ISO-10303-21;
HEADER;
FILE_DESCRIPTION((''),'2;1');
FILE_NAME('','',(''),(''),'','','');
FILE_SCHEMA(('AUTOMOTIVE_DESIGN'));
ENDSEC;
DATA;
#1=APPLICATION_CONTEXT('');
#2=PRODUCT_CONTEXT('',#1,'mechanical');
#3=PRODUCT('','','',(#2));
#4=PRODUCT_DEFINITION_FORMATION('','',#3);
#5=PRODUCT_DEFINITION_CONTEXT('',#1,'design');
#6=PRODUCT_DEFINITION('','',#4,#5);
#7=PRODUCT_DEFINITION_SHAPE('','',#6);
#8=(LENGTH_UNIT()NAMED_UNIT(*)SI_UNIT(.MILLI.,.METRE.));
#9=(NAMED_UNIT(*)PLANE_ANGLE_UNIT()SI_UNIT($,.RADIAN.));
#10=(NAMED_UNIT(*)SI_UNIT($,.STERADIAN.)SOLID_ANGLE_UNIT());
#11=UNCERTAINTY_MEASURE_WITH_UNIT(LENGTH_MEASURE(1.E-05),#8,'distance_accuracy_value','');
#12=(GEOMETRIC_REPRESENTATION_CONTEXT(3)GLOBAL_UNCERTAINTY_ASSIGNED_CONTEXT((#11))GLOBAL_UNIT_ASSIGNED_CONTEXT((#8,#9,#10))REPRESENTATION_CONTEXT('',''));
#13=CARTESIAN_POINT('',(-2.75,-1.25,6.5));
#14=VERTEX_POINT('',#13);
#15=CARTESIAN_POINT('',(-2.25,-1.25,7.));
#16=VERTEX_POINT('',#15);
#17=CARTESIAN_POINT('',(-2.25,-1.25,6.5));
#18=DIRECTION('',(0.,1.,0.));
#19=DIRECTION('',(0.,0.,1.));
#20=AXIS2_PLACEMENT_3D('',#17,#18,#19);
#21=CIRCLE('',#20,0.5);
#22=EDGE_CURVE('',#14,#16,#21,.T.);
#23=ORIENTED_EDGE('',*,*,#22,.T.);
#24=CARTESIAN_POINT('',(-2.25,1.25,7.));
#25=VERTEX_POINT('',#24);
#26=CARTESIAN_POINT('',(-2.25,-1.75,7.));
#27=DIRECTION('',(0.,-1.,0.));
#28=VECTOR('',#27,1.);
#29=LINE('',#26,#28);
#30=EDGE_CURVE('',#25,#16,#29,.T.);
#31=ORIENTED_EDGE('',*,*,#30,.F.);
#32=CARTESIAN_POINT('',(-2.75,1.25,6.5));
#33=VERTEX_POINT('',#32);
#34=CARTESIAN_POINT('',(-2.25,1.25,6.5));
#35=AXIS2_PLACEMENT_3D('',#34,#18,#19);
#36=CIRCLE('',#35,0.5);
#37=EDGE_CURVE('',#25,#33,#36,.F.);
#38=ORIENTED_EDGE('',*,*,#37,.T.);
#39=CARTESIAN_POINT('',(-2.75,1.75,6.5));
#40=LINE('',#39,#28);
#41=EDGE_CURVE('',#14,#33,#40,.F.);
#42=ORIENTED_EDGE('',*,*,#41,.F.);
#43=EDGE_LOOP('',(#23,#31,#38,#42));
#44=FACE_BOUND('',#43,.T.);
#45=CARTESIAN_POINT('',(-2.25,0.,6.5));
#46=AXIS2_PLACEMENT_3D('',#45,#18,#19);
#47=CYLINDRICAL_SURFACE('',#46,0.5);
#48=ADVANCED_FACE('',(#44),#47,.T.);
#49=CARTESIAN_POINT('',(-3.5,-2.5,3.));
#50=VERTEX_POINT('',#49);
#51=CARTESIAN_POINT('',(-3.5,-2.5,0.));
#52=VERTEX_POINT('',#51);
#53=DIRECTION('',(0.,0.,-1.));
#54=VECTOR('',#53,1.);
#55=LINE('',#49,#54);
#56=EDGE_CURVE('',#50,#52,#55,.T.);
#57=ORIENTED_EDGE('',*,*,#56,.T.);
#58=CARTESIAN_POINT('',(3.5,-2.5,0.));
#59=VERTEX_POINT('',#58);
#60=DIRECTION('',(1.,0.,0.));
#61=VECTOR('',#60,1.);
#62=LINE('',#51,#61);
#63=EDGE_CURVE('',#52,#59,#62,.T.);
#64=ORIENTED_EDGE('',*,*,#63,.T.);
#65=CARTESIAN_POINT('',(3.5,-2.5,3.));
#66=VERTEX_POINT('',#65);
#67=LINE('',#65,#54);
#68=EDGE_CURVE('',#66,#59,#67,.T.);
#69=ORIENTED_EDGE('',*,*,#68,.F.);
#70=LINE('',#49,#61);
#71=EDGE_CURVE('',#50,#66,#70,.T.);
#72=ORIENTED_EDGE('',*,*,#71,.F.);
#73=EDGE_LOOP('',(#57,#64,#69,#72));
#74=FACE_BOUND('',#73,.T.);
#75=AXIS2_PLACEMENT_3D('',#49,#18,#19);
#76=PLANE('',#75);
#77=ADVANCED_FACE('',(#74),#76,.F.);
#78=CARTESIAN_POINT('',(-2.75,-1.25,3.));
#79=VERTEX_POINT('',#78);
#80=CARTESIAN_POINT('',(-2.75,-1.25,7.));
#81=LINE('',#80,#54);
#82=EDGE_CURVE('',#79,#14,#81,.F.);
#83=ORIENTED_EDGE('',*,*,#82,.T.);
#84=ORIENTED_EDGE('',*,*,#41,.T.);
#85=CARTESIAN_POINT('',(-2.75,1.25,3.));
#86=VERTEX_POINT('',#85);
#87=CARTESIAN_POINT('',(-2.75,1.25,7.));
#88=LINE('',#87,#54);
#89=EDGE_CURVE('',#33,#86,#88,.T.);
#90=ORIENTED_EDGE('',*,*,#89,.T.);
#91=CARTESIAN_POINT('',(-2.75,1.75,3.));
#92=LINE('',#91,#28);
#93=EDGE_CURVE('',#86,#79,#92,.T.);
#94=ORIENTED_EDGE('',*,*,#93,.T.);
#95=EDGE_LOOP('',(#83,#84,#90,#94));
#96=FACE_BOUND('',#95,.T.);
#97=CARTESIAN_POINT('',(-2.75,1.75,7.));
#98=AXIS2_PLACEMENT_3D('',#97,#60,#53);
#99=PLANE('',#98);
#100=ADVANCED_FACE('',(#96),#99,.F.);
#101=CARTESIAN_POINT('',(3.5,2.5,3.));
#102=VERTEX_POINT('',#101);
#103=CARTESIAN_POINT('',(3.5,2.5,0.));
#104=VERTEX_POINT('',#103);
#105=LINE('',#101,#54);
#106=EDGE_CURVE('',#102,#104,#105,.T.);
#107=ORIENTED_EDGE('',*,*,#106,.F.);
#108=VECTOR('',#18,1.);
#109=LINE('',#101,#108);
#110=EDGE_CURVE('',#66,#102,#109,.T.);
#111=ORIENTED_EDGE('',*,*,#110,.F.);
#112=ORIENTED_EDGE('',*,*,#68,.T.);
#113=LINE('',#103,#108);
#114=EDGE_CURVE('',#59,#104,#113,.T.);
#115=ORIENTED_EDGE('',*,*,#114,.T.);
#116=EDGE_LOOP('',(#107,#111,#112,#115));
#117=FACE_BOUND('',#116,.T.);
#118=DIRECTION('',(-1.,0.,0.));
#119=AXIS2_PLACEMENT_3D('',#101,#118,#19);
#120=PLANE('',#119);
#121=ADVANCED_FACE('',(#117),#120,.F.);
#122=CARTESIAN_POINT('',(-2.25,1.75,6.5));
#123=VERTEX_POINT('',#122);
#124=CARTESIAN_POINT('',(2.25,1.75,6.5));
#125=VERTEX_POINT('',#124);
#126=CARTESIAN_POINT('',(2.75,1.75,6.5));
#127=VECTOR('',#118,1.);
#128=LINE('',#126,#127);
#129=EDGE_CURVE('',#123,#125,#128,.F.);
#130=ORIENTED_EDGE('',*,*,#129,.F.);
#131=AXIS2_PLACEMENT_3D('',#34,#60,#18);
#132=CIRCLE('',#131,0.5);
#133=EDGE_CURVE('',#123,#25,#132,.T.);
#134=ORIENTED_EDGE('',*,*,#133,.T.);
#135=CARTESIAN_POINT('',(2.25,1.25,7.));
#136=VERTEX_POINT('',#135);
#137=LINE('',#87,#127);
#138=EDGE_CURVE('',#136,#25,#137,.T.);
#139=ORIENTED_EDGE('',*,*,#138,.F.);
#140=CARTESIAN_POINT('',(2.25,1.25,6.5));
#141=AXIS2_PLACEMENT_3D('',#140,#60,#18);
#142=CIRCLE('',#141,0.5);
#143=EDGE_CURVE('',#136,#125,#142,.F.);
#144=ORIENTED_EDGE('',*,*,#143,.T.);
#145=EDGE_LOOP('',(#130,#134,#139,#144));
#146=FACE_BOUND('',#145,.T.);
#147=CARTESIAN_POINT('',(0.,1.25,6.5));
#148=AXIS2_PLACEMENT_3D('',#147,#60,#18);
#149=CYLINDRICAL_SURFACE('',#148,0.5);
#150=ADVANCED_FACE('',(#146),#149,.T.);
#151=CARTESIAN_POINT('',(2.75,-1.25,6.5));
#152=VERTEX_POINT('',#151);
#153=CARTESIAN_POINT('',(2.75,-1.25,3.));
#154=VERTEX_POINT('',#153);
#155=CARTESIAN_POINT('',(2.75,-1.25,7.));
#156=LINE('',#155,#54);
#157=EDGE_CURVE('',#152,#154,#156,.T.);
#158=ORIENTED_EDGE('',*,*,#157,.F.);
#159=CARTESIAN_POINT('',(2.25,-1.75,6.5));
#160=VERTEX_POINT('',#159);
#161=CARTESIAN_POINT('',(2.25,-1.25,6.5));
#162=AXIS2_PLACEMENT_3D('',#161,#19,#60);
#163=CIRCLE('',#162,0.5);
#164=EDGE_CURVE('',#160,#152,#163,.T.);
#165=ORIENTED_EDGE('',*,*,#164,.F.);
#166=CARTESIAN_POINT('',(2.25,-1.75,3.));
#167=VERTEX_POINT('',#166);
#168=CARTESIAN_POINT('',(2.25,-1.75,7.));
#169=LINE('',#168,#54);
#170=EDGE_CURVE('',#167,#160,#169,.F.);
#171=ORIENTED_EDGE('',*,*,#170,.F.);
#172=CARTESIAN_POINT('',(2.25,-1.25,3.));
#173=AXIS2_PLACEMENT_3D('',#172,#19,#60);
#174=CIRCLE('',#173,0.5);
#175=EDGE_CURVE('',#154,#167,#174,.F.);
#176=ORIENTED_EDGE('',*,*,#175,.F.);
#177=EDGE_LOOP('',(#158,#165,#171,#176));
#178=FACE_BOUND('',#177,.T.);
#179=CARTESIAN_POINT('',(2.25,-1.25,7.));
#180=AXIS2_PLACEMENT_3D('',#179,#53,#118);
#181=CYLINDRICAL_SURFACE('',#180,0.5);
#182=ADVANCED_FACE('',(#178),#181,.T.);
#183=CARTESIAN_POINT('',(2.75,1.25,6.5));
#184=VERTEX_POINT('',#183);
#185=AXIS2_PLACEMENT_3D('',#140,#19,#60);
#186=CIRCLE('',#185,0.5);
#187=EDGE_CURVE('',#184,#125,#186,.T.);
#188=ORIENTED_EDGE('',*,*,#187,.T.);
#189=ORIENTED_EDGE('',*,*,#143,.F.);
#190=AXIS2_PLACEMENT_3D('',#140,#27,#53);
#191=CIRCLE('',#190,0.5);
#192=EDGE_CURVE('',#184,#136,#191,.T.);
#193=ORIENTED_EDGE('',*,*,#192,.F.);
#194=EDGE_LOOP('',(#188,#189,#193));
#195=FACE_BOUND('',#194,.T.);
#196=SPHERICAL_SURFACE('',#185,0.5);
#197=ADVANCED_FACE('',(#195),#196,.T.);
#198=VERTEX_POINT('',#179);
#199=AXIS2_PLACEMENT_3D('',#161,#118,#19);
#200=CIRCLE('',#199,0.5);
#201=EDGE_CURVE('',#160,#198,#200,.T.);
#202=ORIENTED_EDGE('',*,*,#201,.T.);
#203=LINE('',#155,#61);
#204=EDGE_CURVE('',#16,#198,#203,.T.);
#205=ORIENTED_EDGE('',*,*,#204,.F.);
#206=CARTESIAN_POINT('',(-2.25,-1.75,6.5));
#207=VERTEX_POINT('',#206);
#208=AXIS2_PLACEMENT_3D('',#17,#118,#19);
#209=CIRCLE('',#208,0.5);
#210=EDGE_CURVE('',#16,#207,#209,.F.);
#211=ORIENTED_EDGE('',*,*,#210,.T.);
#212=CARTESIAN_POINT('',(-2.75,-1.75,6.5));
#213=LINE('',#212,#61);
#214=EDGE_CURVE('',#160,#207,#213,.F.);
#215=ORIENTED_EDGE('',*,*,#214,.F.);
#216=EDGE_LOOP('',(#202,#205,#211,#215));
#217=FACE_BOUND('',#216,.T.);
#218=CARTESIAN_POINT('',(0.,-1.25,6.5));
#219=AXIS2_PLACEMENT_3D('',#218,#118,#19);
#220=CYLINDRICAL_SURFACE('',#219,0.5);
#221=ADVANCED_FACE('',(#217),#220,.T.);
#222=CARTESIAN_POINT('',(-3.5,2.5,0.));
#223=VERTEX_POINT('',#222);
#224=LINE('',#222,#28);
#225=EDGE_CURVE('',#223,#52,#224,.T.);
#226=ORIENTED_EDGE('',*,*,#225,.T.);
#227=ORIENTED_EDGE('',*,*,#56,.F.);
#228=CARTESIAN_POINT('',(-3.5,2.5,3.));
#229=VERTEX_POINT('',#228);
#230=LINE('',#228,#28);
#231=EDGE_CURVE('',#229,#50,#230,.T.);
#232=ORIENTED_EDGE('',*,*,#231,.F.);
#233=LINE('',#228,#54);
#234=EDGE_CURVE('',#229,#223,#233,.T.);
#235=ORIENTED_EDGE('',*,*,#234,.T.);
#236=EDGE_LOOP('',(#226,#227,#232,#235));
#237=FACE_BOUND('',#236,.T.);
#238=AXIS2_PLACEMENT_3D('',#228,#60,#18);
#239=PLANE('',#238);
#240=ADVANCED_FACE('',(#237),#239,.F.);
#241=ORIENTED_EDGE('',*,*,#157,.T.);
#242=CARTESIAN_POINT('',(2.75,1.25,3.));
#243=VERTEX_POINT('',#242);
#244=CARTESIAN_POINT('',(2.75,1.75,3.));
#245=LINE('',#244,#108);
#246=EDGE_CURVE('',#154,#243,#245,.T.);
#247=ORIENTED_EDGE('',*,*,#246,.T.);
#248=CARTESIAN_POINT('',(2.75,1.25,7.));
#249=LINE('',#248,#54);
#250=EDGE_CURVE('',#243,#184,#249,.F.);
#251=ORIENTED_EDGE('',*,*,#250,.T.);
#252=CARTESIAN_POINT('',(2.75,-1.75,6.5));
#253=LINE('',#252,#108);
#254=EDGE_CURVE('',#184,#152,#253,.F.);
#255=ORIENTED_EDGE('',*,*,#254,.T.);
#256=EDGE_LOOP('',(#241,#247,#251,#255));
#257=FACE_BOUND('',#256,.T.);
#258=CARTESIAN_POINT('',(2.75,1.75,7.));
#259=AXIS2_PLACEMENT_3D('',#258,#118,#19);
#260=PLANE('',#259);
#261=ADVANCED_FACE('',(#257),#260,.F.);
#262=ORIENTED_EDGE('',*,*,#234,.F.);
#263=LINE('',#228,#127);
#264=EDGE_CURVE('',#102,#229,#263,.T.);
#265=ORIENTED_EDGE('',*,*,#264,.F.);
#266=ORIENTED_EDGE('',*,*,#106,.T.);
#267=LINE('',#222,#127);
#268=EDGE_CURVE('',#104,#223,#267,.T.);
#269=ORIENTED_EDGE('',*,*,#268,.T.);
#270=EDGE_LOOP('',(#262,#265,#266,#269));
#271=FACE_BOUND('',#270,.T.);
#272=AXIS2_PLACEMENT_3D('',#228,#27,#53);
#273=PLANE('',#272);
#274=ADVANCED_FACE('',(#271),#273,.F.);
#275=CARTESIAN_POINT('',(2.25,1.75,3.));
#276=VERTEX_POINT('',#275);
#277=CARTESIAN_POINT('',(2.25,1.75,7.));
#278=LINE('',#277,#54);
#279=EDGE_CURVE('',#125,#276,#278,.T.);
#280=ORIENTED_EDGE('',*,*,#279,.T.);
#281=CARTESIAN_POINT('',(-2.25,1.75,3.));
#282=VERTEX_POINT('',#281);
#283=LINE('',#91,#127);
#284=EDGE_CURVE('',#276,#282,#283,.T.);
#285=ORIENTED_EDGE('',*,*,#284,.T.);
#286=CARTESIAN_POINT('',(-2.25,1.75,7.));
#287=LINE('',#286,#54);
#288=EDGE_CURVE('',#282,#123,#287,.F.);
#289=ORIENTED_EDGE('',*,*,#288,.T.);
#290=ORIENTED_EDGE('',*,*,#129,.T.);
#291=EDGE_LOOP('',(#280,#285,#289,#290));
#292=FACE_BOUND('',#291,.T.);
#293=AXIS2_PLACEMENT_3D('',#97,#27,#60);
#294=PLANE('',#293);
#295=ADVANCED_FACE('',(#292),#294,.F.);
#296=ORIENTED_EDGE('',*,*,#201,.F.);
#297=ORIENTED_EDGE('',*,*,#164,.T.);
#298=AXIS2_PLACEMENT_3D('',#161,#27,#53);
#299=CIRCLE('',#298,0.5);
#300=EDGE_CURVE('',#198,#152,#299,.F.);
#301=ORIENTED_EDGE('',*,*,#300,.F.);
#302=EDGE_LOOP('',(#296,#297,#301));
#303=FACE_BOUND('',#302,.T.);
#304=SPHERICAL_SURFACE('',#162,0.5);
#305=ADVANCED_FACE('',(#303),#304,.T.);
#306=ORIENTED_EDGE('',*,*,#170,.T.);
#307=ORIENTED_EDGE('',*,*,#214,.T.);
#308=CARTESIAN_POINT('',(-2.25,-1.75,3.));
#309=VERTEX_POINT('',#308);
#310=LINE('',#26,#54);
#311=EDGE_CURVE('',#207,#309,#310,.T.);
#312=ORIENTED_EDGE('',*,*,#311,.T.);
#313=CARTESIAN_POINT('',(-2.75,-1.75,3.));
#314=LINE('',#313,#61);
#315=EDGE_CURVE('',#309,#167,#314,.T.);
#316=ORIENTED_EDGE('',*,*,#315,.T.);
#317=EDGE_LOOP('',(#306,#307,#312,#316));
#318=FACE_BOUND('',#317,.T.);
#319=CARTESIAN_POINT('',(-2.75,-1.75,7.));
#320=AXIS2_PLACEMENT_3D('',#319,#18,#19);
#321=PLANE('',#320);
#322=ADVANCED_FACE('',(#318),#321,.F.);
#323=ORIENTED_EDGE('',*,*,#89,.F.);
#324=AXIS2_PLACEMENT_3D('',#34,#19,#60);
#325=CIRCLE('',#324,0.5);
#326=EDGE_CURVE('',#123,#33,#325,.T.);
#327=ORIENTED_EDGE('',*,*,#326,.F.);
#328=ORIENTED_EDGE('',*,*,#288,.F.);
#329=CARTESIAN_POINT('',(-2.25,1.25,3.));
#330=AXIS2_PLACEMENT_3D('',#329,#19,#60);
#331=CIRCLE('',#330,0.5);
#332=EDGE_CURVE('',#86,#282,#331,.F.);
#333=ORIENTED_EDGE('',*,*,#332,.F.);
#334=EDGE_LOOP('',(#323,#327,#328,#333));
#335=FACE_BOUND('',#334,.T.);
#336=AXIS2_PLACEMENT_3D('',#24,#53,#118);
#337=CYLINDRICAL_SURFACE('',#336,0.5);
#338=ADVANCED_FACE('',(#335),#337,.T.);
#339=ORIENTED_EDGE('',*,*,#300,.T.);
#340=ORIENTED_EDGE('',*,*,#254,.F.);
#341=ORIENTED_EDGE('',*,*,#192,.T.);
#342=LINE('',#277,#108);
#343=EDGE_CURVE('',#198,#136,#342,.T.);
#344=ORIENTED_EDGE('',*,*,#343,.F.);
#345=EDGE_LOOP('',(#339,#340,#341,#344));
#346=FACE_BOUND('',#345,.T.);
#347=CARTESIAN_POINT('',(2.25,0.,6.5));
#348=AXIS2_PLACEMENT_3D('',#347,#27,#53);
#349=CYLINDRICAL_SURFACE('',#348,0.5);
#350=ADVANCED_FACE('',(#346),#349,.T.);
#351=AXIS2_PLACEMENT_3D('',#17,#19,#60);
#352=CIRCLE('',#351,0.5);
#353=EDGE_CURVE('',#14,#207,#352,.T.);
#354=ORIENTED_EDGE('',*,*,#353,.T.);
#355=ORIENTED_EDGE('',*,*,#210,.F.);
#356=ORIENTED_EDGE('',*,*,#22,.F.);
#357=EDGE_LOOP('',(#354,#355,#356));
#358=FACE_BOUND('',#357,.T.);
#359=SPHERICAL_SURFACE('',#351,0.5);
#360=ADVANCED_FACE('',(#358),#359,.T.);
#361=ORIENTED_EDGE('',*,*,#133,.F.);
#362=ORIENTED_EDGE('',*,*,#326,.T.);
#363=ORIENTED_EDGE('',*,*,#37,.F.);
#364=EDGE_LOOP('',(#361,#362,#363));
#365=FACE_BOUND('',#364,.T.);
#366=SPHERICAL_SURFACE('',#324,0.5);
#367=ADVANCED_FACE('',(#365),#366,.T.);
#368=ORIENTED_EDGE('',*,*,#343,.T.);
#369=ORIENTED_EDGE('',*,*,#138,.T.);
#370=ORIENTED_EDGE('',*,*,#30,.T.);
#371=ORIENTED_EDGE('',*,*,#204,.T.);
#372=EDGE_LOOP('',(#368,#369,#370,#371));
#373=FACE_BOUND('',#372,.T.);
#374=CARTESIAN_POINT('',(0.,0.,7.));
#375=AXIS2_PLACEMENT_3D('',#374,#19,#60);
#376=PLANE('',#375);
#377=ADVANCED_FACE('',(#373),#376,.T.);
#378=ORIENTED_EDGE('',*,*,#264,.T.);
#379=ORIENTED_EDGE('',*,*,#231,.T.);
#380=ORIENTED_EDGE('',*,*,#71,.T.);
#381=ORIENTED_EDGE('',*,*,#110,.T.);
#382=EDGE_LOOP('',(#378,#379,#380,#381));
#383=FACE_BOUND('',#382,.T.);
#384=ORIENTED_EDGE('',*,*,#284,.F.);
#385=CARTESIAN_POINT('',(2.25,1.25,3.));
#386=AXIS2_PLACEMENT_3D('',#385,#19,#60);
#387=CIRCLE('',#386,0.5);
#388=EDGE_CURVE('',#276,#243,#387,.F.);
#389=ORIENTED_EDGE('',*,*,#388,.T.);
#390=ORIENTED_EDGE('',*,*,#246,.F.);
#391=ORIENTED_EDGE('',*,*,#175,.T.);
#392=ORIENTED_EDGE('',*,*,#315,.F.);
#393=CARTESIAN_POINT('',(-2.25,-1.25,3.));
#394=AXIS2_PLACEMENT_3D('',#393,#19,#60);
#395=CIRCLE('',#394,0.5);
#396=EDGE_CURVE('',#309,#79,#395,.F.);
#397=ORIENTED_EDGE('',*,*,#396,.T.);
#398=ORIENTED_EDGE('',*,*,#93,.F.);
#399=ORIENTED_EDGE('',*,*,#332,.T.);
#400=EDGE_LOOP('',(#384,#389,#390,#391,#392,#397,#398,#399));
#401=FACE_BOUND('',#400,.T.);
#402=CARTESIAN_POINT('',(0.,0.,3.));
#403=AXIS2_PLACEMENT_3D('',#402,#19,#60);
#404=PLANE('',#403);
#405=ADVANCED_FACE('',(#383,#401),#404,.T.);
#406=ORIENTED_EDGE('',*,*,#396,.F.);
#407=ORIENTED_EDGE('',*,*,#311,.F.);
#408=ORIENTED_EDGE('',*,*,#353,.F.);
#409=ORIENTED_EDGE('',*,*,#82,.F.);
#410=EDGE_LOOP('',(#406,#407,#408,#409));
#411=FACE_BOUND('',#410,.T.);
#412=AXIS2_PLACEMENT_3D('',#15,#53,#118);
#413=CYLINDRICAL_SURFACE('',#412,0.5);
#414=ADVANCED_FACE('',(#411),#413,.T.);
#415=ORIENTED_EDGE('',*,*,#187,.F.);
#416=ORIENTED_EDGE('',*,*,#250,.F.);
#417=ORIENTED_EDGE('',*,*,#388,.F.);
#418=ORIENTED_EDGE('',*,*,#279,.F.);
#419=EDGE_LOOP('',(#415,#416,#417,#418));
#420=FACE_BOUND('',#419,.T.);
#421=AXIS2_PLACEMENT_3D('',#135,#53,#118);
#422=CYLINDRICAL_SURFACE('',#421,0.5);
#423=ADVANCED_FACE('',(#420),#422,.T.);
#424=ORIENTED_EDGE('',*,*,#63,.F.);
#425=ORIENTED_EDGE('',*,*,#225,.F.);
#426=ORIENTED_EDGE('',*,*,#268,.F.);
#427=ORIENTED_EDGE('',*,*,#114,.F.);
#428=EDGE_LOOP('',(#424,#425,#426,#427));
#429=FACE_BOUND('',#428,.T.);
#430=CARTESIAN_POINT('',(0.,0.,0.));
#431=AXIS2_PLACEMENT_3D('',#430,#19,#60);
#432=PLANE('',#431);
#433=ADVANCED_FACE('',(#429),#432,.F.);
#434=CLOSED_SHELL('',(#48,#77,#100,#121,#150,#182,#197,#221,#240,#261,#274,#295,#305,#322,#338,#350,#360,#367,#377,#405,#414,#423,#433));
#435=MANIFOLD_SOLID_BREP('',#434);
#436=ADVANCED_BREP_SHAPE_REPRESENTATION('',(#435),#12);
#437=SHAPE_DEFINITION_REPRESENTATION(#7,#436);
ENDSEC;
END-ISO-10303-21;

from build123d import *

# Parameters (mm, degrees)
SKETCH_1_W      = 7
SKETCH_1_H      = 5
EXTRUDE_1_DEPTH = 3
SKETCH_2_W      = 5.5
SKETCH_2_H      = 3.5
EXTRUDE_2_DEPTH = 4
FILLET_1_R      = 0.5
FILLET_2_R      = 0.5


with BuildPart() as part:
    # 草图1 → 凸台-拉伸1 (new body)
    with BuildSketch(Plane.XY):
        Rectangle(SKETCH_1_W, SKETCH_1_H)
    extrude(amount=EXTRUDE_1_DEPTH)

    # 草图2 → 凸台-拉伸2 (add)
    with BuildSketch(Plane.XY.offset(3)):
        Rectangle(SKETCH_2_W, SKETCH_2_H)
    extrude(amount=EXTRUDE_2_DEPTH)

    # 圆角1
    fillet_1_edges = [part.edges().sort_by_distance(p)[0] for p in [
        (2.75, 0, 7),
        (0, 1.75, 7),
        (-2.75, 0, 7),
        (0, -1.75, 7),
    ]]
    fillet(fillet_1_edges, radius=FILLET_1_R)

    # 圆角2
    # the kernel refuses this fillet: 0.5 mm, written as the material it takes off along each edge
    with BuildSketch(Plane(origin=(-2.25, 1.25, 6.5), x_dir=(-1, 0, 0), z_dir=(0, 1, 0))) as fillet_2_piece_1_section:
        Polygon((0, 0), (FILLET_2_R, 0), (FILLET_2_R, FILLET_2_R), (0, FILLET_2_R), align=None)
    fillet_2_piece_1 = extrude(amount=FILLET_2_R, mode=Mode.PRIVATE)
    fillet_2_piece_1 = fillet_2_piece_1 - Plane(origin=(-2.25, 1.25, 6.5), x_dir=(0.7071067811865475, 0, -0.7071067811865475), z_dir=(0, 1, 0)) * Sphere(FILLET_2_R, mode=Mode.PRIVATE)
    add(fillet_2_piece_1, mode=Mode.SUBTRACT)
    with BuildSketch(Plane(origin=(2.25, 1.25, 6.5), x_dir=(1, 0, 0), z_dir=(0, 1, 0))) as fillet_2_piece_2_section:
        Polygon((0, 0), (FILLET_2_R, 0), (FILLET_2_R, -FILLET_2_R), (0, -FILLET_2_R), align=None)
    fillet_2_piece_2 = extrude(amount=FILLET_2_R, mode=Mode.PRIVATE)
    fillet_2_piece_2 = fillet_2_piece_2 - Plane(origin=(2.25, 1.25, 6.5), x_dir=(-0.7071067811865475, 0, -0.7071067811865475), z_dir=(0, 1, 0)) * Sphere(FILLET_2_R, mode=Mode.PRIVATE)
    add(fillet_2_piece_2, mode=Mode.SUBTRACT)
    with BuildSketch(Plane(origin=(-2.25, -1.25, 6.5), x_dir=(0, -1, 0), z_dir=(-1, 0, 0))) as fillet_2_piece_3_section:
        Polygon((0, 0), (FILLET_2_R, 0), (FILLET_2_R, FILLET_2_R), (0, FILLET_2_R), align=None)
    fillet_2_piece_3 = extrude(amount=FILLET_2_R, mode=Mode.PRIVATE)
    fillet_2_piece_3 = fillet_2_piece_3 - Plane(origin=(-2.25, -1.25, 6.5), x_dir=(0, 0.7071067811865475, -0.7071067811865475), z_dir=(-1, 0, 0)) * Sphere(FILLET_2_R, mode=Mode.PRIVATE)
    add(fillet_2_piece_3, mode=Mode.SUBTRACT)
    with BuildSketch(Plane(origin=(2.25, -1.25, 6.5), x_dir=(0, -1, 0), z_dir=(1, 0, 0))) as fillet_2_piece_4_section:
        Polygon((0, 0), (FILLET_2_R, 0), (FILLET_2_R, -FILLET_2_R), (0, -FILLET_2_R), align=None)
    fillet_2_piece_4 = extrude(amount=FILLET_2_R, mode=Mode.PRIVATE)
    fillet_2_piece_4 = fillet_2_piece_4 - Plane(origin=(2.25, -1.25, 6.5), x_dir=(0, 0.7071067811865475, -0.7071067811865475), z_dir=(1, 0, 0)) * Sphere(FILLET_2_R, mode=Mode.PRIVATE)
    add(fillet_2_piece_4, mode=Mode.SUBTRACT)
    with BuildSketch(Plane(origin=(2.75, -1.75, 3), x_dir=(0, 1, 0), z_dir=(0, 0, 1)), Plane(origin=(2.75, 1.75, 3), x_dir=(-1, 0, 0), z_dir=(0, 0, 1))) as fillet_2_piece_5:
        with BuildLine():
            CenterArc((FILLET_2_R, FILLET_2_R), FILLET_2_R, 180, 90)
            Line((0, FILLET_2_R), (0, 0))
            Line((0, 0), (FILLET_2_R, 0))
        make_face()
    extrude(amount=3.5, mode=Mode.SUBTRACT)
    with BuildSketch(Plane(origin=(-2.75, -1.75, 3), x_dir=(0, 1, 0), z_dir=(0, 0, 1)), Plane(origin=(-2.75, 1.75, 3), x_dir=(1, 0, 0), z_dir=(0, 0, 1))) as fillet_2_piece_6:
        with BuildLine():
            CenterArc((FILLET_2_R, -FILLET_2_R), FILLET_2_R, 90, 90)
            Line((0, -FILLET_2_R), (0, 0))
            Line((0, 0), (FILLET_2_R, 0))
        make_face()
    extrude(amount=3.5, mode=Mode.SUBTRACT)


solid = part.part
